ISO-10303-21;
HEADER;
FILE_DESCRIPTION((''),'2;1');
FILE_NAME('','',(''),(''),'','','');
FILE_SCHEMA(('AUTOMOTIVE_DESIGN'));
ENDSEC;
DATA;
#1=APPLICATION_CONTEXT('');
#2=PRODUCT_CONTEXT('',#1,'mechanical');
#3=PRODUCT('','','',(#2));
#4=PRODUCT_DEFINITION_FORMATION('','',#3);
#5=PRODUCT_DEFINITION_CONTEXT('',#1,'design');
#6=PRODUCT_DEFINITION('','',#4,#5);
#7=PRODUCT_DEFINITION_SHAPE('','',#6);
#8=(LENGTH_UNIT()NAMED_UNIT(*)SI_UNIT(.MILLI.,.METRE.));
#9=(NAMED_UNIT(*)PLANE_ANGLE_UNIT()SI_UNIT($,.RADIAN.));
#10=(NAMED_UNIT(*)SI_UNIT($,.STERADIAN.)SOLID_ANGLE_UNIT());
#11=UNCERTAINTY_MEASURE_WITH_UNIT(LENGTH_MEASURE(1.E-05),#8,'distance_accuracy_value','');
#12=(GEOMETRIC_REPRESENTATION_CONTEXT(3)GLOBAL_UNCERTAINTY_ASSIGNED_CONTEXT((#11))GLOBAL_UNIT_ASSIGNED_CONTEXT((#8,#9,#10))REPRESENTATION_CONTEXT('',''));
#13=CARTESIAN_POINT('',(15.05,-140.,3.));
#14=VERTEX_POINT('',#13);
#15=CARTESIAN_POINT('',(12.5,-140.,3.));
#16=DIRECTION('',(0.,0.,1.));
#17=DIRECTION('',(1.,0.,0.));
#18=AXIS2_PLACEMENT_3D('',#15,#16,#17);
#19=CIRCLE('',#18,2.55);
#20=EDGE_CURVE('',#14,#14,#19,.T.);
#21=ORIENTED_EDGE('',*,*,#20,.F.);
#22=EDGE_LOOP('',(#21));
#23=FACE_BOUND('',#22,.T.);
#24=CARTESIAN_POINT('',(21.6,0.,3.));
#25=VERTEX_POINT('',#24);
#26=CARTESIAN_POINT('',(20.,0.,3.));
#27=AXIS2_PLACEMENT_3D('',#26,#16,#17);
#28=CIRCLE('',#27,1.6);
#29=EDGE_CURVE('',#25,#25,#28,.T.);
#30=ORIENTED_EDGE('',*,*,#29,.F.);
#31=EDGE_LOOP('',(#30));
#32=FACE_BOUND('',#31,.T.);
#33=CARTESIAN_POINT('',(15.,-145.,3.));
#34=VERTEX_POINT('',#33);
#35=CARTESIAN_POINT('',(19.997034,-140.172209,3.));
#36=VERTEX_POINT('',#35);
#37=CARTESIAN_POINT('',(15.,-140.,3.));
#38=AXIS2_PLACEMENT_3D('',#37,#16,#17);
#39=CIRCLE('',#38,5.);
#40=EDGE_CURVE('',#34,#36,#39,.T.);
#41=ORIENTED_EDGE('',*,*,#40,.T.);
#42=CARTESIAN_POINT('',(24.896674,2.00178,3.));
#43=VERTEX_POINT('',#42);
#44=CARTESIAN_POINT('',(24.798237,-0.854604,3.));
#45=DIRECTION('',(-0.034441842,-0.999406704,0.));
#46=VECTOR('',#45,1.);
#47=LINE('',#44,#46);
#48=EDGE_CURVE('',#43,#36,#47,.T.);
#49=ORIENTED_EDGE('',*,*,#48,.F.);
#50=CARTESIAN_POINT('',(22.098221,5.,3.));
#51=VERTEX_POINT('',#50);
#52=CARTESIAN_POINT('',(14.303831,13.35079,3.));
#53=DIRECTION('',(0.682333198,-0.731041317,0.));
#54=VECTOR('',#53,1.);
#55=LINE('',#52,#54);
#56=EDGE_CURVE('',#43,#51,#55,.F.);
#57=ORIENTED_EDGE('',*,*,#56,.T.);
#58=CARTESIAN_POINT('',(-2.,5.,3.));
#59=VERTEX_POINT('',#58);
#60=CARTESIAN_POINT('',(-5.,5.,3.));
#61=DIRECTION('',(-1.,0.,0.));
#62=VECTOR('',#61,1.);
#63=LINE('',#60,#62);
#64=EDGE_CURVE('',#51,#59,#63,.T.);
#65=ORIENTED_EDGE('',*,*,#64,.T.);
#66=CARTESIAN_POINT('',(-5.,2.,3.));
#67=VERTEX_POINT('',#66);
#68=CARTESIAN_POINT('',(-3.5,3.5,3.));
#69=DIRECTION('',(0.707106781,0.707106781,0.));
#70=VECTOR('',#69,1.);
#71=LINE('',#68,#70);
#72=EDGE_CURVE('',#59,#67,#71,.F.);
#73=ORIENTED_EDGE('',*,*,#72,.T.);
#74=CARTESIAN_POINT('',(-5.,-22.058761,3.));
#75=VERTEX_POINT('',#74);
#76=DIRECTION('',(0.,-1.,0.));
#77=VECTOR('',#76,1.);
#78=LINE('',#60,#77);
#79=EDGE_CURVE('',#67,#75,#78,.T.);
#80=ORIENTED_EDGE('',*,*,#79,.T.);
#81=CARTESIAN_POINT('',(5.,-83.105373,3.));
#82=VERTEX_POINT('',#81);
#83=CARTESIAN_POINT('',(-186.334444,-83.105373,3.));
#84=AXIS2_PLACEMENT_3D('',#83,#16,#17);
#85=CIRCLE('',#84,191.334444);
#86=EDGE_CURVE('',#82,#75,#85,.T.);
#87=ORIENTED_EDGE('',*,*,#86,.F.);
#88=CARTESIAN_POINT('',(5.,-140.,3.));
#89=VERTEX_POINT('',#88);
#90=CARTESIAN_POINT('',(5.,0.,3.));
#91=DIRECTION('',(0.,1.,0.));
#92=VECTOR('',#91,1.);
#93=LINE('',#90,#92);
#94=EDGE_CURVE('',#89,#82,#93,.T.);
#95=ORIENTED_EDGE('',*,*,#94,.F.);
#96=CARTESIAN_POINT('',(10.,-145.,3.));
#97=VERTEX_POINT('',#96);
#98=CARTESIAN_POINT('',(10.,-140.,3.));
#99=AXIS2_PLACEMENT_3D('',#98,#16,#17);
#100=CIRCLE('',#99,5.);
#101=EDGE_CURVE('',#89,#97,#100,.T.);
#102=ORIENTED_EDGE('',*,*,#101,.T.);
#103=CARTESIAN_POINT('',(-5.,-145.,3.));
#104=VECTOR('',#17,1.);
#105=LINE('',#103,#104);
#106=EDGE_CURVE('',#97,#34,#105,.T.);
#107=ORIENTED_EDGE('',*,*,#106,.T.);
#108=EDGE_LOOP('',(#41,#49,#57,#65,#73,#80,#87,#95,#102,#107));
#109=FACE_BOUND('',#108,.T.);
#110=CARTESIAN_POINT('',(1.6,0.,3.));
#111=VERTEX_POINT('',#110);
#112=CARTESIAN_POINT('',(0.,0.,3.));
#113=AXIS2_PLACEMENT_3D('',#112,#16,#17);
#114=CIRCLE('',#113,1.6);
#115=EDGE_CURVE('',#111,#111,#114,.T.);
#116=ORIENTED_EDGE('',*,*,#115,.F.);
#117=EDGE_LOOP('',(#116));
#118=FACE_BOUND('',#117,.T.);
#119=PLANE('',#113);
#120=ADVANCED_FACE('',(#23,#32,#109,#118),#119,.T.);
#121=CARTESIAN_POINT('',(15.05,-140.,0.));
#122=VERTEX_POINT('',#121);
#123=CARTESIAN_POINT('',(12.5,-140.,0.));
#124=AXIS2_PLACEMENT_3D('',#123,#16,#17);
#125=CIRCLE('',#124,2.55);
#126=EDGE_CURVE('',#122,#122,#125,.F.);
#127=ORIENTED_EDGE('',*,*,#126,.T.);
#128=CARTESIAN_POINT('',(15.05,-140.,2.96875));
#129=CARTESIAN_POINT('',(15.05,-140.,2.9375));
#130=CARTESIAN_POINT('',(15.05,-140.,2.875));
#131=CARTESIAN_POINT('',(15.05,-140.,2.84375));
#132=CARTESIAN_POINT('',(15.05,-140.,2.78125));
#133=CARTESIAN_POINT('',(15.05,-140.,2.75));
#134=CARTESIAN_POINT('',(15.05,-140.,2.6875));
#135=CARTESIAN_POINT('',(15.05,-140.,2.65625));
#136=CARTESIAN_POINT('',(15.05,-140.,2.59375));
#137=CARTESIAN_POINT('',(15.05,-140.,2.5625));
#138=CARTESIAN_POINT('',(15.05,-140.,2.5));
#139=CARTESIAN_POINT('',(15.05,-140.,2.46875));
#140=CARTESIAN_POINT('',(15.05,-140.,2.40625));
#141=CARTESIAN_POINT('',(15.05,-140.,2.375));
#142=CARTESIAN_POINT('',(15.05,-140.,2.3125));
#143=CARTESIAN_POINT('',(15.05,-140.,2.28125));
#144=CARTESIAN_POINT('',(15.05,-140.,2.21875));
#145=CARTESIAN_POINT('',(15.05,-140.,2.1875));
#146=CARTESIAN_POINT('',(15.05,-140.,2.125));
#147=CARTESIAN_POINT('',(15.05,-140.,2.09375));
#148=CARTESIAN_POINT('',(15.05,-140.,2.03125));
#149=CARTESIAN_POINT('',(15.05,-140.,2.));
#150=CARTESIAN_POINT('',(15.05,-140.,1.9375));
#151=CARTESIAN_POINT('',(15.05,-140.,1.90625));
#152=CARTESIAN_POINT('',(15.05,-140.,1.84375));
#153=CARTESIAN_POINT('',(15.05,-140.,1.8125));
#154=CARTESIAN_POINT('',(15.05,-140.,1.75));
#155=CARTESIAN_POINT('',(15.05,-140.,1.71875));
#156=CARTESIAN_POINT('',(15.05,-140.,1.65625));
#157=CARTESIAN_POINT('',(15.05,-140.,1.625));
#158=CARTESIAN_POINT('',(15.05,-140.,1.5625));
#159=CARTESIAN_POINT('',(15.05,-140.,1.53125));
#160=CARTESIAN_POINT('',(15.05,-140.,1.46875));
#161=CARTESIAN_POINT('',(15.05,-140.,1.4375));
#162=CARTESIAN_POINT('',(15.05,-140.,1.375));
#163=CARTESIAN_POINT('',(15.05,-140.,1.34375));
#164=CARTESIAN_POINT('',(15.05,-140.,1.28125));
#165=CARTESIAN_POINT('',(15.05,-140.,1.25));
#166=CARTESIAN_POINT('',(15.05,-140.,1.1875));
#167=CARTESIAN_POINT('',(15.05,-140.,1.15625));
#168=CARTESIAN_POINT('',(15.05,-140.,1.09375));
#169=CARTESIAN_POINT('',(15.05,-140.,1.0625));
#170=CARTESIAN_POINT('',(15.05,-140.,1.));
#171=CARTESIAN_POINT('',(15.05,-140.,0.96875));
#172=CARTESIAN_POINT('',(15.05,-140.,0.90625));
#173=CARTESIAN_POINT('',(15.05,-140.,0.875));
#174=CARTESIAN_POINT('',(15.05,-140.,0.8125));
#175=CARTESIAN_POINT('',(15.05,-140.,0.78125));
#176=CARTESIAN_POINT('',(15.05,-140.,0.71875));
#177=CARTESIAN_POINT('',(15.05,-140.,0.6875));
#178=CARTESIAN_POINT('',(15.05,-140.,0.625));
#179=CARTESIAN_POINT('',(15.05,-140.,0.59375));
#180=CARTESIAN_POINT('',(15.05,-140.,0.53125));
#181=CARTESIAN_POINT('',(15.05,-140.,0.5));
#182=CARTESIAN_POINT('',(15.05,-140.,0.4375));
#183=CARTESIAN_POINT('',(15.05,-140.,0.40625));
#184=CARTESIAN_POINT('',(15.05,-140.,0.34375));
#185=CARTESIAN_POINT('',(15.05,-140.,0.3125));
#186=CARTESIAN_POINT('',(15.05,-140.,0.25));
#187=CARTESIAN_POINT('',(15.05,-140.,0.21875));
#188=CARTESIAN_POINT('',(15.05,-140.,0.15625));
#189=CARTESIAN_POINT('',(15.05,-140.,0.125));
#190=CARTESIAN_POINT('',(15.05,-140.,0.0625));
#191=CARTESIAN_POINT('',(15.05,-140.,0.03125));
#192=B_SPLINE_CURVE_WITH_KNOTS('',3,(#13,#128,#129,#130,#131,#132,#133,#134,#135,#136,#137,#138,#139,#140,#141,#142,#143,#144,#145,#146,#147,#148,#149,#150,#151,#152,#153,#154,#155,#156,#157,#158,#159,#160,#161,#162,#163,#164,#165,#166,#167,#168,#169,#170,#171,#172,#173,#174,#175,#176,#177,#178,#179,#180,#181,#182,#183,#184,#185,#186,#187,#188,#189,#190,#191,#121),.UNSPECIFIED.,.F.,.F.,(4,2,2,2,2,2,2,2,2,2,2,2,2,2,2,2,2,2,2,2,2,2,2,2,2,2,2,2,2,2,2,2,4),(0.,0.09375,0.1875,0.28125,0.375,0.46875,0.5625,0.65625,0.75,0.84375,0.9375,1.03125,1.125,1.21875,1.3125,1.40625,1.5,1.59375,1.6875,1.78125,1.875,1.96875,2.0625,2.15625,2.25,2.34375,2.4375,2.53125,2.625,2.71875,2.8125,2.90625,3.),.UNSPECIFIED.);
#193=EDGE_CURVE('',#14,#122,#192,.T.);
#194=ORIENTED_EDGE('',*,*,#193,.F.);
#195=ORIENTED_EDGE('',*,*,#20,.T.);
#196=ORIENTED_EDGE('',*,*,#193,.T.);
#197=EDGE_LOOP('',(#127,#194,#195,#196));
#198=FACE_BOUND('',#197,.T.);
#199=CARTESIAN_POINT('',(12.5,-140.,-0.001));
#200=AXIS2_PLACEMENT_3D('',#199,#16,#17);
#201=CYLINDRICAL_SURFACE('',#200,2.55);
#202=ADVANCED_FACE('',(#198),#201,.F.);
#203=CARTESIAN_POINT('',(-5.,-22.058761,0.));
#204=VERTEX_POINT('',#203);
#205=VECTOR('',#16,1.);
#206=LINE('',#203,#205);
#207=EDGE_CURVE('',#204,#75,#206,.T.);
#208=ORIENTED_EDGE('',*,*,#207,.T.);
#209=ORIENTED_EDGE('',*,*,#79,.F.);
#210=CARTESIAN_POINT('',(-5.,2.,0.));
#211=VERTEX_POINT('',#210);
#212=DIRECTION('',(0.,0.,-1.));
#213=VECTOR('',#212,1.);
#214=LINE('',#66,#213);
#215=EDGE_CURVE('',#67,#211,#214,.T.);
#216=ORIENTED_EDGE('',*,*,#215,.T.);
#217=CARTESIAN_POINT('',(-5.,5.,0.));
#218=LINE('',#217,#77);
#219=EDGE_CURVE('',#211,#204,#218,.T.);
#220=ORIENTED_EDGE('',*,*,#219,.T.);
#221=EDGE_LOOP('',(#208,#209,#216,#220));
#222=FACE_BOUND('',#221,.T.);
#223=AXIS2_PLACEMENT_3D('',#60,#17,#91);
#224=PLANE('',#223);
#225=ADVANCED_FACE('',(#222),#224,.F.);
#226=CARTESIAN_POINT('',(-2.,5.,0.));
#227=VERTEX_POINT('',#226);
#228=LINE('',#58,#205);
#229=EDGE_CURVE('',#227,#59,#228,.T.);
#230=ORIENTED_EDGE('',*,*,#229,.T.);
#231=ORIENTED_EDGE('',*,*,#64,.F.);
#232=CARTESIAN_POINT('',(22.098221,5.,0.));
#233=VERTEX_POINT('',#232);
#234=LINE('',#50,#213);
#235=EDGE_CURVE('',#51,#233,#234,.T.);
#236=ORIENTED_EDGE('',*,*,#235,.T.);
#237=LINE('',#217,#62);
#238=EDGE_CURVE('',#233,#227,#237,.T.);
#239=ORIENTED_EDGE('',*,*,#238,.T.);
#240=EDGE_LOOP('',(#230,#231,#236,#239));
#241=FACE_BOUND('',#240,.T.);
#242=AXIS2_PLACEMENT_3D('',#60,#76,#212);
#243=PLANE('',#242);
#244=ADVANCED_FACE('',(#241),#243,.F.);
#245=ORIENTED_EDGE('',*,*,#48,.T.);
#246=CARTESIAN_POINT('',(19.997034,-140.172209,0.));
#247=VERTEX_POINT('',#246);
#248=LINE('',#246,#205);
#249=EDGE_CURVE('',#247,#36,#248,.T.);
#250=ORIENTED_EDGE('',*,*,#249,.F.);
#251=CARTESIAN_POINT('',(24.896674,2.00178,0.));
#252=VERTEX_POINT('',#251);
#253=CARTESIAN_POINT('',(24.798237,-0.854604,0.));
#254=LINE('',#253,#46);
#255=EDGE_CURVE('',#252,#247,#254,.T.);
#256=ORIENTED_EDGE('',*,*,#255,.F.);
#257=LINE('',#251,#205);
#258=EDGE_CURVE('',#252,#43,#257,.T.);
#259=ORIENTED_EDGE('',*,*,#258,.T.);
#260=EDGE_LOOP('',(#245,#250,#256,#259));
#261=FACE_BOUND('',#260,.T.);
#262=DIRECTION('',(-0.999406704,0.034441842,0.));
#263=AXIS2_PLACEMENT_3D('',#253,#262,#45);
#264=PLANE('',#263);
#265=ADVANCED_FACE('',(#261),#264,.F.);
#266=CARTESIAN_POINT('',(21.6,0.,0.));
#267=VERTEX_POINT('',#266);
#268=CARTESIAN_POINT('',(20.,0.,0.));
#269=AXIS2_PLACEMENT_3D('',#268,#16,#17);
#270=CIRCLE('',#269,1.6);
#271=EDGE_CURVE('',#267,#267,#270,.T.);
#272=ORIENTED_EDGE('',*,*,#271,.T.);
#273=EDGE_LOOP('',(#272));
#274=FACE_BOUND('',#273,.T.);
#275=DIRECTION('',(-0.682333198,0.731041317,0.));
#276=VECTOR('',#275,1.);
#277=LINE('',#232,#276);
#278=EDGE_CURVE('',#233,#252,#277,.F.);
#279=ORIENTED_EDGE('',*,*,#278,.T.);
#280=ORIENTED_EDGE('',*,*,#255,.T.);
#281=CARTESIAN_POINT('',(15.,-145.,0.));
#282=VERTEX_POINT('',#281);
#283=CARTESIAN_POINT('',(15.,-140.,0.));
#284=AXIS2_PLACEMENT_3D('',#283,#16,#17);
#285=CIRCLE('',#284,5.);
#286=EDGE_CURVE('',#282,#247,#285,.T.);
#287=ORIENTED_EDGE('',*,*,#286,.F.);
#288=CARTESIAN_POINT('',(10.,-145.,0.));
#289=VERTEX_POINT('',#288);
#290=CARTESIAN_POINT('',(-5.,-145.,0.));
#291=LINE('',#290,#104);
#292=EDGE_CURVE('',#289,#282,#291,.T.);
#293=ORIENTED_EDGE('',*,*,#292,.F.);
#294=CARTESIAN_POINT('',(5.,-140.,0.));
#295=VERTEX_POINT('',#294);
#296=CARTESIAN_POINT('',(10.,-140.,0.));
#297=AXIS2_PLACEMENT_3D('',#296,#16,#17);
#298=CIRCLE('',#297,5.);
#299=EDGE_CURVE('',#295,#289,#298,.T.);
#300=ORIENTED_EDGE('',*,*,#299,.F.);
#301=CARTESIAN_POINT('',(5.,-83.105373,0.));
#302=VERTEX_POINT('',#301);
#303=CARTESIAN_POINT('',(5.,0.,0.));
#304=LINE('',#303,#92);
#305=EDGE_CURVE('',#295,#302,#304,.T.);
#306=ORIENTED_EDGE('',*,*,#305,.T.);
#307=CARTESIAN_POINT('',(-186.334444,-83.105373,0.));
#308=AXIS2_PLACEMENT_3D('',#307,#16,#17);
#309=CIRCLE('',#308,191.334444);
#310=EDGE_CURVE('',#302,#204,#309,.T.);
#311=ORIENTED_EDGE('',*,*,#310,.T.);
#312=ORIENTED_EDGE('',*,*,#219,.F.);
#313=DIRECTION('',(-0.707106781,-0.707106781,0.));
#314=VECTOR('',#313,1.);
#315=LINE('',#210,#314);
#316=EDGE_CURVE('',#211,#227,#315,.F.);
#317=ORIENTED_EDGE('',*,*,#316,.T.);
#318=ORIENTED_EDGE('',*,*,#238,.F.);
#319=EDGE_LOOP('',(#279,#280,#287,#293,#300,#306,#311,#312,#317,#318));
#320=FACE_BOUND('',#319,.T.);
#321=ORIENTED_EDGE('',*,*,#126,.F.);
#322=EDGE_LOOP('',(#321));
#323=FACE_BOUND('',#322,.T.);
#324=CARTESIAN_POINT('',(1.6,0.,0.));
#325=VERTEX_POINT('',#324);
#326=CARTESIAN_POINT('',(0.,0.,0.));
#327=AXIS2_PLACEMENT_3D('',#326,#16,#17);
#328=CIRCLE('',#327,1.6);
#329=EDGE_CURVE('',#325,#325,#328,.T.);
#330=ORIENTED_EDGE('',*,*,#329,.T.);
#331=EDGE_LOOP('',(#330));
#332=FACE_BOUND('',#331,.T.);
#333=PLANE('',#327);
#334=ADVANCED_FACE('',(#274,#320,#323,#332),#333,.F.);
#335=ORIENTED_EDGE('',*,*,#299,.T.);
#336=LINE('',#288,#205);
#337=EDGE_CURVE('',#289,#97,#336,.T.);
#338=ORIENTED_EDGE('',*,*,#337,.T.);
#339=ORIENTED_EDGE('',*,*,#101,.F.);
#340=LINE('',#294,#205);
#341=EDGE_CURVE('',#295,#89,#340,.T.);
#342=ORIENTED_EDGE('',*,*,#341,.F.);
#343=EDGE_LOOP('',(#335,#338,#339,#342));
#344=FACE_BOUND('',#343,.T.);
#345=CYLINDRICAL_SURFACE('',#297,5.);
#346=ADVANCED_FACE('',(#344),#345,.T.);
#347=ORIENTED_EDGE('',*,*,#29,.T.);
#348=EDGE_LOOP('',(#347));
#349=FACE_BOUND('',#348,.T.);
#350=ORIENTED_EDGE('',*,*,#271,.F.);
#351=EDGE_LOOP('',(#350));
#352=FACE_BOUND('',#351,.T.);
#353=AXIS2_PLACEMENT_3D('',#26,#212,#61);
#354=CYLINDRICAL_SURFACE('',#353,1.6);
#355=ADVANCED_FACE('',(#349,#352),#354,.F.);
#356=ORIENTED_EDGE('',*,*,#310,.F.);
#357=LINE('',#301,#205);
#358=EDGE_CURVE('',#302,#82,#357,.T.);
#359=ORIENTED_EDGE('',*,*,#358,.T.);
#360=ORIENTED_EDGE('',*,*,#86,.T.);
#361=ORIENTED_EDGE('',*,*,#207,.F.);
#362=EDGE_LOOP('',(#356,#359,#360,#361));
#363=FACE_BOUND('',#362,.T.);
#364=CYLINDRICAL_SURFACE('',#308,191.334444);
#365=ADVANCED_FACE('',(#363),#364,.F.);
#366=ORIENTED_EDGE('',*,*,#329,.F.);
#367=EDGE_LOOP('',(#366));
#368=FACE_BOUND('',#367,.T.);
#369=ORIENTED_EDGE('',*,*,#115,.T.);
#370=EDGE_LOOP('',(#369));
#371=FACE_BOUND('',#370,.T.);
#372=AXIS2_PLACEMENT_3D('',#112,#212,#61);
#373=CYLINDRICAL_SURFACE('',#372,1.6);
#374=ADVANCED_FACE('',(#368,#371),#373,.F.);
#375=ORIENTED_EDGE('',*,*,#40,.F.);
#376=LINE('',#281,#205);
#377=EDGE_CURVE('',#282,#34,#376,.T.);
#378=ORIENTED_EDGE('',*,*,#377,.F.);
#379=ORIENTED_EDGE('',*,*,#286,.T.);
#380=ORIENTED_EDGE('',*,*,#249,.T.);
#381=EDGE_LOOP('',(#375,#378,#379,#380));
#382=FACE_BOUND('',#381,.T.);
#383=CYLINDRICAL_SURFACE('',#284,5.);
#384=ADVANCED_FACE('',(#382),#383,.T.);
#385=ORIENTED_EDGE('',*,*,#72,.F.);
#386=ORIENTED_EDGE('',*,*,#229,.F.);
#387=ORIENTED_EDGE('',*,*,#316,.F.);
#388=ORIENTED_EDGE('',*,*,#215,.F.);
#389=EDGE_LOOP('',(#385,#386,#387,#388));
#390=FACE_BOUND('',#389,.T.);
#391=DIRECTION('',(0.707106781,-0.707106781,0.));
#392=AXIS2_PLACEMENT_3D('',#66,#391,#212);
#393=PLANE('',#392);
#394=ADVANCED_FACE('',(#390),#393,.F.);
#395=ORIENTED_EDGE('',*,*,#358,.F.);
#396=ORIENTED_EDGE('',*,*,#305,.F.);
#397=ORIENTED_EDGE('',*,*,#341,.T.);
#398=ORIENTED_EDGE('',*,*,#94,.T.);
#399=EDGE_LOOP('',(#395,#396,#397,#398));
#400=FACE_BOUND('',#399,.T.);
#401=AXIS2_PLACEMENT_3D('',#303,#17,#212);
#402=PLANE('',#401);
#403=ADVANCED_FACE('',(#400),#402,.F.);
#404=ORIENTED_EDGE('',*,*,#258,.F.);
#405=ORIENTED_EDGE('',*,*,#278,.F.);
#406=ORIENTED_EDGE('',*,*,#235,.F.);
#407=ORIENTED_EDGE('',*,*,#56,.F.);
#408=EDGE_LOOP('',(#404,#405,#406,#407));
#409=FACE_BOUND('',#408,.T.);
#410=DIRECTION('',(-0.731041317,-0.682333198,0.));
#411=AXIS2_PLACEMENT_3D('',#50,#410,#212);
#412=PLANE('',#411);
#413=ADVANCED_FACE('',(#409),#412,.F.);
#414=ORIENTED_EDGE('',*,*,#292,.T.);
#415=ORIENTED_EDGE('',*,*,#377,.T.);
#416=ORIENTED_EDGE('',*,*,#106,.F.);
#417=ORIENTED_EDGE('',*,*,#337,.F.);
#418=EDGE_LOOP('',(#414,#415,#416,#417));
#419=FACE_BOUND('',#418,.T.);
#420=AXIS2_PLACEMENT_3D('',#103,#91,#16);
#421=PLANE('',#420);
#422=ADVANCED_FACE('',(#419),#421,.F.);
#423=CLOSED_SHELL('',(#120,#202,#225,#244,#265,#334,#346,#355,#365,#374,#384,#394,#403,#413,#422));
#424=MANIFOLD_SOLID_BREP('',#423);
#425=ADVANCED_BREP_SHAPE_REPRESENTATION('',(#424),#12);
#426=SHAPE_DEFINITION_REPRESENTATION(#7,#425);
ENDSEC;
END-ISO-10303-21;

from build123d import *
from OCP.BRepFilletAPI import BRepFilletAPI_MakeChamfer

# Parameters (mm, degrees)
SKETCH_1_W          = 30
SKETCH_1_H          = 150
SKETCH_1_R          = 1.6
EXTRUDE_1_DEPTH     = 3
CUT_EXTRUDE_3_REACH = 149.17
SKETCH_4_W          = 5
SKETCH_4_H          = 55
CHAMFER_1_SIZE      = 2.5
CUT_EXTRUDE_4_REACH = 149.17
SKETCH_5_R          = 2.55
EXTRUDE_5_DEPTH     = 3
EXTRUDE_2_DEPTH     = 3
FILLET_2_R          = 65
FILLET_3_R          = 115
FILLET_4_R          = 5
CUT_EXTRUDE_START   = -3
CUT_EXTRUDE_6_DEPTH = 3
CHAMFER_2_SIZE      = 3
CHAMFER_2_SIZE2     = 2.901779002


# Read off the part's stored shape, not the designer's step: 切除-拉伸6
with BuildPart() as part:
    # 草图1 → 凸台-拉伸1 (new body)
    with BuildSketch(Plane.XY):
        with Locations((10, -70)):
            Rectangle(SKETCH_1_W, SKETCH_1_H)
        Circle(SKETCH_1_R, mode=Mode.SUBTRACT)
        with Locations((20, 0)):
            Circle(SKETCH_1_R, mode=Mode.SUBTRACT)
    extrude(amount=EXTRUDE_1_DEPTH)

    # 草图4 → 切除-拉伸3 (cut, up to next)
    with BuildSketch(Plane.XY.offset(3), mode=Mode.PRIVATE) as cut_extrude_3_sk1:
        with Locations((-2.5, -117.5)):
            Rectangle(SKETCH_4_W, SKETCH_4_H)
    cut_extrude_3_tool1 = extrude(cut_extrude_3_sk1.sketch, amount=-CUT_EXTRUDE_3_REACH, mode=Mode.PRIVATE) & part.part
    add(cut_extrude_3_tool1.solids().sort_by_distance((-2.5, -117.5, 3))[0], mode=Mode.SUBTRACT)

    # 倒角1
    chamfer_1_edges = [part.edges().sort_by_distance(p)[0] for p in [
        (-5, -90, 1.5),
    ]]
    chamfer(chamfer_1_edges, length=CHAMFER_1_SIZE)

    # 草图5 → 切除-拉伸4 (cut, up to next)
    with BuildSketch(Plane.XY.offset(3), mode=Mode.PRIVATE) as cut_extrude_4_sk1:
        with Locations((12.5, -140)):
            Circle(SKETCH_5_R)
    cut_extrude_4_tool1 = extrude(cut_extrude_4_sk1.sketch, amount=-CUT_EXTRUDE_4_REACH, mode=Mode.PRIVATE) & part.part
    add(cut_extrude_4_tool1.solids().sort_by_distance((12.5, -140, 3))[0], mode=Mode.SUBTRACT)

    # 草图9 → 凸台-拉伸5 (add)
    with BuildSketch(Plane(origin=(0, 0, 0), x_dir=(-1, 0, 0), z_dir=(0, 0, -1))):
        Polygon((5, -87.5), (0, -117.5), (0, -90), (2.5, -90), align=None)
    extrude(amount=-EXTRUDE_5_DEPTH)

    # 草图11 → 拉伸-薄壁2 (add)
    with BuildSketch(Plane.XY.offset(3)):
        Polygon((19.5, -67.916286439), (19.5, -61.710608008), (19.5, -3.420169007), (16.5, -3.420169007), (16.5, -61.710608008), (16.5, -67.916286439), align=None)
    extrude(amount=-EXTRUDE_2_DEPTH)

    # 圆角2
    fillet_2_edges = [part.edges().sort_by_distance(p)[0] for p in [
        (-5, -87.5, 1.5),
    ]]
    fillet(fillet_2_edges, radius=FILLET_2_R)

    # 圆角3
    fillet_3_edges = [part.edges().sort_by_distance(p)[0] for p in [
        (0, -117.5, 1.5),
    ]]
    fillet(fillet_3_edges, radius=FILLET_3_R)

    # 圆角4
    fillet_4_edges = [part.edges().sort_by_distance(p)[0] for p in [
        (0, -145, 1.5),
    ]]
    fillet(fillet_4_edges, radius=FILLET_4_R)

    # 切除-拉伸6 outline → 切除-拉伸6 (cut)
    with BuildSketch(Plane.XY.offset(3).offset(CUT_EXTRUDE_START)):
        with BuildLine():
            ThreePointArc((19.997033519, -140.172209208), (18.47411528, -143.595903644), (15, -145))
            Line((15, -145), (25, -145))
            Line((25, -145), (25, 5))
            Line((25, 5), (19.997033519, -140.172209208))
        make_face()
        with BuildLine():
            ThreePointArc((10, -145), (6.464466094, -143.535533906), (5, -140))
            Line((5, -140), (5, -83.1053734))
            ThreePointArc((5, -83.1053734), (2.483450387, -52.175255091), (-5, -22.058761091))
            Line((-5, -22.058761091), (-5, -82.120435531))
            ThreePointArc((-5, -82.120435531), (-4.778523942, -87.481670081), (-4.115605049, -92.806369705))
            Line((-4.115605049, -92.806369705), (-1.564698759, -108.111807444))
            ThreePointArc((-1.564698759, -108.111807444), (-0.391842257, -117.532429856), (0, -127.017690984))
            Line((0, -127.017690984), (0, -140))
            ThreePointArc((0, -140), (1.464466094, -143.535533906), (5, -145))
            Line((5, -145), (10, -145))
        make_face()
    extrude(amount=CUT_EXTRUDE_6_DEPTH, mode=Mode.SUBTRACT)

    # 倒角2: one chamfer whose edges measure the first distance from different faces: ONE call of the kernel's chamfer builder (chamfer() names one face for all edges)
    chamfer_2_edges_1 = [part.edges().sort_by_distance(p)[0] for p in [
        (-5, 5, 1.5),
    ]]
    chamfer_2_edges_2 = [part.edges().sort_by_distance(p)[0] for p in [
        (25, 5, 1.5),
    ]]
    chamfer_2_side_2 = [part.faces().sort_by_distance(p)[0] for p in [
        (22.498516759, -67.586104604, 1.5),
    ]]
    chamfer_2 = BRepFilletAPI_MakeChamfer(part.part.solid().wrapped)
    for e in chamfer_2_edges_1:
        chamfer_2.Add(CHAMFER_2_SIZE, e.wrapped)
    for e in chamfer_2_edges_2:
        chamfer_2.Add(CHAMFER_2_SIZE, CHAMFER_2_SIZE2, e.wrapped, chamfer_2_side_2[0].wrapped)  # the first distance lies on this face
    add(Compound.cast(chamfer_2.Shape()), mode=Mode.REPLACE)


solid = part.part
